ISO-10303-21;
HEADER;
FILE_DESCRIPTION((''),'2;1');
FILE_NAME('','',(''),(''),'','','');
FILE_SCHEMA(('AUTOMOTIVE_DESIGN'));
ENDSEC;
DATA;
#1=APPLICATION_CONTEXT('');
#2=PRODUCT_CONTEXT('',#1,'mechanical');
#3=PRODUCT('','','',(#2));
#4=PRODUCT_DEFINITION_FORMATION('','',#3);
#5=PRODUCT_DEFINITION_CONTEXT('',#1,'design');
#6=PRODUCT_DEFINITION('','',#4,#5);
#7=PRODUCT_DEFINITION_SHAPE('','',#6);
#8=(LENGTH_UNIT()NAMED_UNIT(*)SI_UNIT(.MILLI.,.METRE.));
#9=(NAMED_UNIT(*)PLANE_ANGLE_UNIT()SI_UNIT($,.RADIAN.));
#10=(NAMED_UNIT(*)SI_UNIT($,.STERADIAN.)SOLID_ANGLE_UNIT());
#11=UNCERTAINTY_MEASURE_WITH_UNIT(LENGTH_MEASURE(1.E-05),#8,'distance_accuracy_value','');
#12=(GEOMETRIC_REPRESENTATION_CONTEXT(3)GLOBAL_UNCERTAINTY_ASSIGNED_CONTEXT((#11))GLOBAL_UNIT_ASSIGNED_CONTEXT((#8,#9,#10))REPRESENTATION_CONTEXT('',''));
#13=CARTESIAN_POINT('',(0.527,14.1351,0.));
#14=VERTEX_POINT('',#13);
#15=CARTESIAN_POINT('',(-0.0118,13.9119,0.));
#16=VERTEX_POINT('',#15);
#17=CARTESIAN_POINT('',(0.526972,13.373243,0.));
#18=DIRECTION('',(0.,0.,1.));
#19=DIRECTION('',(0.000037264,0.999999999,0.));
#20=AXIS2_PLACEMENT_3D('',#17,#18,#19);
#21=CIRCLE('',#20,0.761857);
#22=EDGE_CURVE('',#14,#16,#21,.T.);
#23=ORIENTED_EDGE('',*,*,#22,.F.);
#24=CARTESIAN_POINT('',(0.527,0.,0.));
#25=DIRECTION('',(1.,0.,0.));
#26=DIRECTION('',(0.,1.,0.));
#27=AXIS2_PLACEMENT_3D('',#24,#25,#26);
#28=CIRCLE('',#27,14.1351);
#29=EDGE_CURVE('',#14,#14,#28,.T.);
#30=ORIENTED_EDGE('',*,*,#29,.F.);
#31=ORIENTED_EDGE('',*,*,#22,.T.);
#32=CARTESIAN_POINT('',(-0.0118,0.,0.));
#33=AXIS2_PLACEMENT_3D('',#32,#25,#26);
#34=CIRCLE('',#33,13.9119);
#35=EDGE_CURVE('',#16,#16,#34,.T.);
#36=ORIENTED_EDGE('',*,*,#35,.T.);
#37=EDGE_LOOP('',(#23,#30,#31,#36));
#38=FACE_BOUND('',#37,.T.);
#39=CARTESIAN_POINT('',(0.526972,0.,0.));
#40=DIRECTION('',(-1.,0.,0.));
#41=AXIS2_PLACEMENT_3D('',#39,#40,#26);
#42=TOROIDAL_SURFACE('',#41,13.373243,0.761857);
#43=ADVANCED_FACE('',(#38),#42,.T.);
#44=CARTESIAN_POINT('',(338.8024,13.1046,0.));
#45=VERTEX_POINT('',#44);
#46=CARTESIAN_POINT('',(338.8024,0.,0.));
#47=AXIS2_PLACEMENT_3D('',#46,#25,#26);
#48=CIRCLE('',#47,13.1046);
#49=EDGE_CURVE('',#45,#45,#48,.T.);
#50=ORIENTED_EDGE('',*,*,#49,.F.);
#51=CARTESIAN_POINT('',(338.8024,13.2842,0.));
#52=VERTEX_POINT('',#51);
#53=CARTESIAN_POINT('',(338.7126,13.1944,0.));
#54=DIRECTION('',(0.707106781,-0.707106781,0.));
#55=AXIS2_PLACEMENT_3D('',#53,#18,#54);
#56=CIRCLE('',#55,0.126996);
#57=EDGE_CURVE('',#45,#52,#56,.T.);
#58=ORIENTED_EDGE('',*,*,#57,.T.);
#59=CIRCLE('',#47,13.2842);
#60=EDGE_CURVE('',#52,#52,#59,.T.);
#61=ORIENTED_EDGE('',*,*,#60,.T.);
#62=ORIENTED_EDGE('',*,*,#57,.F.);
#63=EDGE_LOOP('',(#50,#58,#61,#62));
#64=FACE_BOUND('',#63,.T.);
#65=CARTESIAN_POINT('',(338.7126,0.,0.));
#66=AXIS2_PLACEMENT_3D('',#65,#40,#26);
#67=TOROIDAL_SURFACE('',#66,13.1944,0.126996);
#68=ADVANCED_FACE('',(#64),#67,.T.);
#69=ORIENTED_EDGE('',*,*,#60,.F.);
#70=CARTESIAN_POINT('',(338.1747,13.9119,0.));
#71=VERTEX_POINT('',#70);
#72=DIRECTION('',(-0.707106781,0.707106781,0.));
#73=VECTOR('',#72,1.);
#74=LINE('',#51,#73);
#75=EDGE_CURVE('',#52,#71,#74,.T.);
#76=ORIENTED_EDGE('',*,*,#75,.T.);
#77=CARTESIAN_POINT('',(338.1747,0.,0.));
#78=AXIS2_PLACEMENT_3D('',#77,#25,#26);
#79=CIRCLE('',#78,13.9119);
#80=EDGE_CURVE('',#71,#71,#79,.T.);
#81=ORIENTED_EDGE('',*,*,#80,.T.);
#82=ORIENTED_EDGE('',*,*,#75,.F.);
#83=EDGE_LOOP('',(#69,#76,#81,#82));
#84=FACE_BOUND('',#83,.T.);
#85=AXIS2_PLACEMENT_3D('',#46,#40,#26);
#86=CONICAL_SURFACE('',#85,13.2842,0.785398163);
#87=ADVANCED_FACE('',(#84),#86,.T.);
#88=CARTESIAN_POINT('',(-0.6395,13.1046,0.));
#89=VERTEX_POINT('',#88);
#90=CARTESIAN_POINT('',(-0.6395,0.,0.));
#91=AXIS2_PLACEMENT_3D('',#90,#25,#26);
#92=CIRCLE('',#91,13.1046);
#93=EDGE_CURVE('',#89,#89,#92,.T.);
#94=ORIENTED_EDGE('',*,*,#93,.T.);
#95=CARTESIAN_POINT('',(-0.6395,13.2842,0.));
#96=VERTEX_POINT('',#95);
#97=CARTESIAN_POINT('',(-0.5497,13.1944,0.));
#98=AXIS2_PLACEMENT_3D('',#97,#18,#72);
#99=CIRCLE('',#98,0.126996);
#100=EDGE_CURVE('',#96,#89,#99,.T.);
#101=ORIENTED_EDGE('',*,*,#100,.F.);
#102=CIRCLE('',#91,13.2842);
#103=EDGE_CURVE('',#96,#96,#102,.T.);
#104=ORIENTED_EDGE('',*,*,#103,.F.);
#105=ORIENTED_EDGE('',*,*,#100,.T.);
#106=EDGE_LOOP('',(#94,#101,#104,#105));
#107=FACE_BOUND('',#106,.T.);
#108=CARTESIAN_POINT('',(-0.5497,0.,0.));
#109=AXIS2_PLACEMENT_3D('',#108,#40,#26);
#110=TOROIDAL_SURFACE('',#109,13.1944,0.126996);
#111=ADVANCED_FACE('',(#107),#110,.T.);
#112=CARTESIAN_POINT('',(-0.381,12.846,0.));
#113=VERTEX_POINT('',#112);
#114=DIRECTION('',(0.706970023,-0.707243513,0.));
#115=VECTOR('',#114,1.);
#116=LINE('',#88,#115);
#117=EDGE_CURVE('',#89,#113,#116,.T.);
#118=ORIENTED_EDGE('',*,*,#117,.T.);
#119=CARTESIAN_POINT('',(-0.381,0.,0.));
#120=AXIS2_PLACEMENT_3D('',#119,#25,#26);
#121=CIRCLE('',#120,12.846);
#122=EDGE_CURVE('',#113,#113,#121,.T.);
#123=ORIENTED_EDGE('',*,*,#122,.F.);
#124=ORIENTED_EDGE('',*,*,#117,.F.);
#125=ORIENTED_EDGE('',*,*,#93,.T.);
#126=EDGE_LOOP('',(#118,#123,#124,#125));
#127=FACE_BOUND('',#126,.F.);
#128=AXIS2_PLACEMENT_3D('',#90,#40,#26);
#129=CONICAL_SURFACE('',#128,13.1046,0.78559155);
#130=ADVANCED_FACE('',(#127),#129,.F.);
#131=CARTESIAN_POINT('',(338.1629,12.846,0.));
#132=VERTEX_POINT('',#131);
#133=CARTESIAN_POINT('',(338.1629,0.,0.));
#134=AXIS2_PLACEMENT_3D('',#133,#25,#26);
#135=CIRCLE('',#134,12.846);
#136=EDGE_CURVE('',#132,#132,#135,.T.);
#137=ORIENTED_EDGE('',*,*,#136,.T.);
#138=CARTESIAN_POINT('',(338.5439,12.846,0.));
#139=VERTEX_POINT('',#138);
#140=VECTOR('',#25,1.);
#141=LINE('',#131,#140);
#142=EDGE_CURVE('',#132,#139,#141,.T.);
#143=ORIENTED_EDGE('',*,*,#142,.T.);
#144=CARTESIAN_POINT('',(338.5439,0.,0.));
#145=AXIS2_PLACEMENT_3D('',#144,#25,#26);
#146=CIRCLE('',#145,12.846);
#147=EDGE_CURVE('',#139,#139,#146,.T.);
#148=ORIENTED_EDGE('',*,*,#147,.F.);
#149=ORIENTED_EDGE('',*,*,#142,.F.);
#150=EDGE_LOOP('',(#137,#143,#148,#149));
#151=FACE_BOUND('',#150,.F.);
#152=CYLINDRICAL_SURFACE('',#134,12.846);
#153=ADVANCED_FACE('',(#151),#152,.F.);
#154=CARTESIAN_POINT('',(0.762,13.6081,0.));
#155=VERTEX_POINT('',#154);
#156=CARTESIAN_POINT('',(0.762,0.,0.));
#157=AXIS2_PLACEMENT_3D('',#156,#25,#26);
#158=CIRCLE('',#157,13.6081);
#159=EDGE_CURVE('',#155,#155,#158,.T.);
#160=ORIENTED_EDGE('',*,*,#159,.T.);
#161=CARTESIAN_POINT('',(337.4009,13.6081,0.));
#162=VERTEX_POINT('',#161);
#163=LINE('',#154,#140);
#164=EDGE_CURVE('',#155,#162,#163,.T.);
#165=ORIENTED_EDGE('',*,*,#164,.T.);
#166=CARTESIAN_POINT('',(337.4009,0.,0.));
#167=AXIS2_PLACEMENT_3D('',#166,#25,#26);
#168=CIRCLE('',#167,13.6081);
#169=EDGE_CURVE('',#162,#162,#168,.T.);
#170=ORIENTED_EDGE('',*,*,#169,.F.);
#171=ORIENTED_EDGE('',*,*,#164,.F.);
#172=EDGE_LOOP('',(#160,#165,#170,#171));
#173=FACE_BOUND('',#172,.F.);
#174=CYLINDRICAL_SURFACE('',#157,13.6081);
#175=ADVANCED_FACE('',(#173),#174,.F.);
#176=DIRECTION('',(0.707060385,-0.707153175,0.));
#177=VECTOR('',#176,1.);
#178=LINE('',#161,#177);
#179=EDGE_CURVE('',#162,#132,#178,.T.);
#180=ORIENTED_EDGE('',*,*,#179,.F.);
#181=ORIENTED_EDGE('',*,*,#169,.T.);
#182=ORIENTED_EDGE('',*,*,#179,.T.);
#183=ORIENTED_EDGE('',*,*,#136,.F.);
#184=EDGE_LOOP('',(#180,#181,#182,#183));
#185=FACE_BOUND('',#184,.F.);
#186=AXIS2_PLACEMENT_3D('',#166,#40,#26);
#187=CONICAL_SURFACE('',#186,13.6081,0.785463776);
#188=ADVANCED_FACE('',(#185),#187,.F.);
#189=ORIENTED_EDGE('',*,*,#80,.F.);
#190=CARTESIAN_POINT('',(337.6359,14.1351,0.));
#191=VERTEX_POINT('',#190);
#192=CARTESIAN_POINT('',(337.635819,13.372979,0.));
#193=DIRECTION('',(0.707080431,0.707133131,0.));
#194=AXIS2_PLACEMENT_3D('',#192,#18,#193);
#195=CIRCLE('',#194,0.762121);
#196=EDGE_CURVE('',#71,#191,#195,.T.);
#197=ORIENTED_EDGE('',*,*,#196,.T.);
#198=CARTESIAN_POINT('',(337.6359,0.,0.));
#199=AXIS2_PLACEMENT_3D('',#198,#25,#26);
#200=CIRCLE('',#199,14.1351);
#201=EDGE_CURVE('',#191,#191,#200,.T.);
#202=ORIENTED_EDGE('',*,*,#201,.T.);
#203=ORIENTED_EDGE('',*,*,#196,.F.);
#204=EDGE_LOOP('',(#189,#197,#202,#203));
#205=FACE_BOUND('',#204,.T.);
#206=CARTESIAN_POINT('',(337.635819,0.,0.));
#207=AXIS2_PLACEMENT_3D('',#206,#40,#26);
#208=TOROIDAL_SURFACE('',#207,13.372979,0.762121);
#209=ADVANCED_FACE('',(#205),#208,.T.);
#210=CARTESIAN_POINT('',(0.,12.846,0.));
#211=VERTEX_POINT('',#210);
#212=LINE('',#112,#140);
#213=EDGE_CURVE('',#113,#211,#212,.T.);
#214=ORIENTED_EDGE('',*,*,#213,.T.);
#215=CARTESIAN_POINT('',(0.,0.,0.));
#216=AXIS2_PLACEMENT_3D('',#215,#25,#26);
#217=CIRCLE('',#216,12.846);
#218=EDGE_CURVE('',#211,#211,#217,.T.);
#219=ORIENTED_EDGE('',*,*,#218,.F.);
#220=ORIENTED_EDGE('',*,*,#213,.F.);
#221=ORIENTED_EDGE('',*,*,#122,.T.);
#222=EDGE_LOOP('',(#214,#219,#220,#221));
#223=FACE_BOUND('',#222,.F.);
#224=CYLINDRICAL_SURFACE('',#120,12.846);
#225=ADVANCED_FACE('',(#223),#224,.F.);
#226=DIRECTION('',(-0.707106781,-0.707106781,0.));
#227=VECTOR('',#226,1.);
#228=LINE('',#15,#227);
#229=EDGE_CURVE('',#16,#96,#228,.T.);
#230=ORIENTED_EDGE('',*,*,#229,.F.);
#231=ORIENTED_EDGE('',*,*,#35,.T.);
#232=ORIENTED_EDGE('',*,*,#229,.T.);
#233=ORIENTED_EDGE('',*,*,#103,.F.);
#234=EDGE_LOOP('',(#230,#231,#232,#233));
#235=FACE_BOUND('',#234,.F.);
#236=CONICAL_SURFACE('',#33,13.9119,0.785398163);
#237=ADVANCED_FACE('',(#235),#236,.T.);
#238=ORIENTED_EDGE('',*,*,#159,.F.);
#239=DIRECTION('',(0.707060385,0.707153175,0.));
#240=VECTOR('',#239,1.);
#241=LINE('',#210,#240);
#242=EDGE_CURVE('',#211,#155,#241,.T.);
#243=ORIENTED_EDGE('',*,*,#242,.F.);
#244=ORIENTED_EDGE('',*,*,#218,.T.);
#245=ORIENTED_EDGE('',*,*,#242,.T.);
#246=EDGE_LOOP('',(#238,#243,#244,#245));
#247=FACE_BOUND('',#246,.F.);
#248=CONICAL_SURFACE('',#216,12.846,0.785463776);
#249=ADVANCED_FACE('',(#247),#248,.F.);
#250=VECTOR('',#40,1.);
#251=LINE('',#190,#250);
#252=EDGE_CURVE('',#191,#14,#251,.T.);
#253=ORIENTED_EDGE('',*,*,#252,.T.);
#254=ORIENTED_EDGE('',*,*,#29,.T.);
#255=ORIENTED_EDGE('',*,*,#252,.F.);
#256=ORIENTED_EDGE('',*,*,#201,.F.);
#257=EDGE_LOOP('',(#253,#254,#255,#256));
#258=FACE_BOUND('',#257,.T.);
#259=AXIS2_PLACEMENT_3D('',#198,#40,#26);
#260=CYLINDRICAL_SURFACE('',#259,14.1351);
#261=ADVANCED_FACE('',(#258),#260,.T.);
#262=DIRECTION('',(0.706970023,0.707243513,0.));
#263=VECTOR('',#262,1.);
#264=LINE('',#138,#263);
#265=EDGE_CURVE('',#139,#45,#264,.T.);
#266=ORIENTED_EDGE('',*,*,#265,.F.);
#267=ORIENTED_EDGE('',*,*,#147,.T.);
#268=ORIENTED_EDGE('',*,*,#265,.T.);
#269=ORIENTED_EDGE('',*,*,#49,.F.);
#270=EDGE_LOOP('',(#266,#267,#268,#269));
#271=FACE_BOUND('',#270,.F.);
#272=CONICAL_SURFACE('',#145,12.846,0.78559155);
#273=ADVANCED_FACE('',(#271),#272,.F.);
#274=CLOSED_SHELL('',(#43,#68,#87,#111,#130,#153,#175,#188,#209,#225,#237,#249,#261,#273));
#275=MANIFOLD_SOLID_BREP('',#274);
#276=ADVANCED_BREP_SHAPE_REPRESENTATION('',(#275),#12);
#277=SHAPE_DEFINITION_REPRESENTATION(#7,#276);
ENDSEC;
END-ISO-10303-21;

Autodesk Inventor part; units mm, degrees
sketch "Sketch_1" plane through (0, 0, 0) normal (0, 0, 1) x (1, 0, 0)
  line L0 (338.1629, 0) -> (0, 0)
  arc A0 (-0.6395, 13.2842) -> (-0.6395, 13.1046) centre (-0.5497, 13.1944) ccw
  line L1 (-0.6395, 13.1046) -> (-0.381, 12.846)
  line L2 (-0.381, 12.846) -> (0, 12.846)
  line L3 (0, 12.846) -> (0.762, 13.6081)
  line L4 (0.762, 13.6081) -> (337.4009, 13.6081)
  line L5 (337.4009, 13.6081) -> (338.1629, 12.846)
  line L6 (338.1629, 12.846) -> (338.5439, 12.846)
  line L7 (338.5439, 12.846) -> (338.8024, 13.1046)
  arc A1 (338.8024, 13.1046) -> (338.8024, 13.2842) centre (338.7126, 13.1944) ccw
  line L8 (338.8024, 13.2842) -> (338.1747, 13.9119)
  arc A2 (338.1747, 13.9119) -> (337.6359, 14.1351) centre (337.6359, 13.3731) ccw
  line L9 (337.6359, 14.1351) -> (0.527, 14.1351)
  arc A3 (0.527, 14.1351) -> (-0.0118, 13.9119) centre (0.527, 13.3731) ccw
  line L10 (-0.0118, 13.9119) -> (-0.6395, 13.2842)
revolve "Revolution1" add sketch "Sketch_1" angle 360 about axis through (338.1629, 0, 0) along (1, 0, 0)
ref_plane "tube_front_XY" through (0, 0, 0) normal (1, 0, 0) x (0, 0, -1)
ref_plane "tube_front_YZ" through (0, 0, 0) normal (0, 0, -1) x (0, 1, 0)
ref_plane "tube_front_ZX" through (0, 0, 0) normal (0, 1, 0) x (1, 0, 0)
ref_plane "tube_rear_XY" through (338.1629, 0, 0) normal (1, 0, 0) x (0, 0, -1)
ref_plane "tube_rear_YZ" through (338.1629, 0, 0) normal (0, 0, -1) x (0, 1, 0)
ref_plane "tube_rear_ZX" through (338.1629, 0, 0) normal (0, 1, 0) x (1, 0, 0)
ref_plane "cp1_XY" through (169.0815, 14.1351, 0) normal (1, 0, 0) x (0, 0, -1)
ref_plane "cp1_YZ" through (169.0815, 14.1351, 0) normal (0, 0, -1) x (0, 1, 0)
ref_plane "cp1_ZX" through (169.0815, 14.1351, 0) normal (0, 1, 0) x (1, 0, 0)
ref_plane "cp2_XY" through (169.0815, 0, -14.1351) normal (1, 0, 0) x (0, 0, -1)
ref_plane "cp2_YZ" through (169.0815, 0, -14.1351) normal (0, 0, -1) x (0, 1, 0)
ref_plane "cp2_ZX" through (169.0815, 0, -14.1351) normal (0, 1, 0) x (1, 0, 0)
ref_plane "cp3_XY" through (169.0815, -14.1351, 0) normal (1, 0, 0) x (0, 0, -1)
ref_plane "cp3_YZ" through (169.0815, -14.1351, 0) normal (0, 0, -1) x (0, 1, 0)
ref_plane "cp3_ZX" through (169.0815, -14.1351, 0) normal (0, 1, 0) x (1, 0, 0)
ref_plane "cp4_XY" through (169.0815, 0, 14.1351) normal (1, 0, 0) x (0, 0, -1)
ref_plane "cp4_YZ" through (169.0815, 0, 14.1351) normal (0, 0, -1) x (0, 1, 0)
ref_plane "cp4_ZX" through (169.0815, 0, 14.1351) normal (0, 1, 0) x (1, 0, 0)
properties part number "09R-13.31350" material "Stainless Steel"
